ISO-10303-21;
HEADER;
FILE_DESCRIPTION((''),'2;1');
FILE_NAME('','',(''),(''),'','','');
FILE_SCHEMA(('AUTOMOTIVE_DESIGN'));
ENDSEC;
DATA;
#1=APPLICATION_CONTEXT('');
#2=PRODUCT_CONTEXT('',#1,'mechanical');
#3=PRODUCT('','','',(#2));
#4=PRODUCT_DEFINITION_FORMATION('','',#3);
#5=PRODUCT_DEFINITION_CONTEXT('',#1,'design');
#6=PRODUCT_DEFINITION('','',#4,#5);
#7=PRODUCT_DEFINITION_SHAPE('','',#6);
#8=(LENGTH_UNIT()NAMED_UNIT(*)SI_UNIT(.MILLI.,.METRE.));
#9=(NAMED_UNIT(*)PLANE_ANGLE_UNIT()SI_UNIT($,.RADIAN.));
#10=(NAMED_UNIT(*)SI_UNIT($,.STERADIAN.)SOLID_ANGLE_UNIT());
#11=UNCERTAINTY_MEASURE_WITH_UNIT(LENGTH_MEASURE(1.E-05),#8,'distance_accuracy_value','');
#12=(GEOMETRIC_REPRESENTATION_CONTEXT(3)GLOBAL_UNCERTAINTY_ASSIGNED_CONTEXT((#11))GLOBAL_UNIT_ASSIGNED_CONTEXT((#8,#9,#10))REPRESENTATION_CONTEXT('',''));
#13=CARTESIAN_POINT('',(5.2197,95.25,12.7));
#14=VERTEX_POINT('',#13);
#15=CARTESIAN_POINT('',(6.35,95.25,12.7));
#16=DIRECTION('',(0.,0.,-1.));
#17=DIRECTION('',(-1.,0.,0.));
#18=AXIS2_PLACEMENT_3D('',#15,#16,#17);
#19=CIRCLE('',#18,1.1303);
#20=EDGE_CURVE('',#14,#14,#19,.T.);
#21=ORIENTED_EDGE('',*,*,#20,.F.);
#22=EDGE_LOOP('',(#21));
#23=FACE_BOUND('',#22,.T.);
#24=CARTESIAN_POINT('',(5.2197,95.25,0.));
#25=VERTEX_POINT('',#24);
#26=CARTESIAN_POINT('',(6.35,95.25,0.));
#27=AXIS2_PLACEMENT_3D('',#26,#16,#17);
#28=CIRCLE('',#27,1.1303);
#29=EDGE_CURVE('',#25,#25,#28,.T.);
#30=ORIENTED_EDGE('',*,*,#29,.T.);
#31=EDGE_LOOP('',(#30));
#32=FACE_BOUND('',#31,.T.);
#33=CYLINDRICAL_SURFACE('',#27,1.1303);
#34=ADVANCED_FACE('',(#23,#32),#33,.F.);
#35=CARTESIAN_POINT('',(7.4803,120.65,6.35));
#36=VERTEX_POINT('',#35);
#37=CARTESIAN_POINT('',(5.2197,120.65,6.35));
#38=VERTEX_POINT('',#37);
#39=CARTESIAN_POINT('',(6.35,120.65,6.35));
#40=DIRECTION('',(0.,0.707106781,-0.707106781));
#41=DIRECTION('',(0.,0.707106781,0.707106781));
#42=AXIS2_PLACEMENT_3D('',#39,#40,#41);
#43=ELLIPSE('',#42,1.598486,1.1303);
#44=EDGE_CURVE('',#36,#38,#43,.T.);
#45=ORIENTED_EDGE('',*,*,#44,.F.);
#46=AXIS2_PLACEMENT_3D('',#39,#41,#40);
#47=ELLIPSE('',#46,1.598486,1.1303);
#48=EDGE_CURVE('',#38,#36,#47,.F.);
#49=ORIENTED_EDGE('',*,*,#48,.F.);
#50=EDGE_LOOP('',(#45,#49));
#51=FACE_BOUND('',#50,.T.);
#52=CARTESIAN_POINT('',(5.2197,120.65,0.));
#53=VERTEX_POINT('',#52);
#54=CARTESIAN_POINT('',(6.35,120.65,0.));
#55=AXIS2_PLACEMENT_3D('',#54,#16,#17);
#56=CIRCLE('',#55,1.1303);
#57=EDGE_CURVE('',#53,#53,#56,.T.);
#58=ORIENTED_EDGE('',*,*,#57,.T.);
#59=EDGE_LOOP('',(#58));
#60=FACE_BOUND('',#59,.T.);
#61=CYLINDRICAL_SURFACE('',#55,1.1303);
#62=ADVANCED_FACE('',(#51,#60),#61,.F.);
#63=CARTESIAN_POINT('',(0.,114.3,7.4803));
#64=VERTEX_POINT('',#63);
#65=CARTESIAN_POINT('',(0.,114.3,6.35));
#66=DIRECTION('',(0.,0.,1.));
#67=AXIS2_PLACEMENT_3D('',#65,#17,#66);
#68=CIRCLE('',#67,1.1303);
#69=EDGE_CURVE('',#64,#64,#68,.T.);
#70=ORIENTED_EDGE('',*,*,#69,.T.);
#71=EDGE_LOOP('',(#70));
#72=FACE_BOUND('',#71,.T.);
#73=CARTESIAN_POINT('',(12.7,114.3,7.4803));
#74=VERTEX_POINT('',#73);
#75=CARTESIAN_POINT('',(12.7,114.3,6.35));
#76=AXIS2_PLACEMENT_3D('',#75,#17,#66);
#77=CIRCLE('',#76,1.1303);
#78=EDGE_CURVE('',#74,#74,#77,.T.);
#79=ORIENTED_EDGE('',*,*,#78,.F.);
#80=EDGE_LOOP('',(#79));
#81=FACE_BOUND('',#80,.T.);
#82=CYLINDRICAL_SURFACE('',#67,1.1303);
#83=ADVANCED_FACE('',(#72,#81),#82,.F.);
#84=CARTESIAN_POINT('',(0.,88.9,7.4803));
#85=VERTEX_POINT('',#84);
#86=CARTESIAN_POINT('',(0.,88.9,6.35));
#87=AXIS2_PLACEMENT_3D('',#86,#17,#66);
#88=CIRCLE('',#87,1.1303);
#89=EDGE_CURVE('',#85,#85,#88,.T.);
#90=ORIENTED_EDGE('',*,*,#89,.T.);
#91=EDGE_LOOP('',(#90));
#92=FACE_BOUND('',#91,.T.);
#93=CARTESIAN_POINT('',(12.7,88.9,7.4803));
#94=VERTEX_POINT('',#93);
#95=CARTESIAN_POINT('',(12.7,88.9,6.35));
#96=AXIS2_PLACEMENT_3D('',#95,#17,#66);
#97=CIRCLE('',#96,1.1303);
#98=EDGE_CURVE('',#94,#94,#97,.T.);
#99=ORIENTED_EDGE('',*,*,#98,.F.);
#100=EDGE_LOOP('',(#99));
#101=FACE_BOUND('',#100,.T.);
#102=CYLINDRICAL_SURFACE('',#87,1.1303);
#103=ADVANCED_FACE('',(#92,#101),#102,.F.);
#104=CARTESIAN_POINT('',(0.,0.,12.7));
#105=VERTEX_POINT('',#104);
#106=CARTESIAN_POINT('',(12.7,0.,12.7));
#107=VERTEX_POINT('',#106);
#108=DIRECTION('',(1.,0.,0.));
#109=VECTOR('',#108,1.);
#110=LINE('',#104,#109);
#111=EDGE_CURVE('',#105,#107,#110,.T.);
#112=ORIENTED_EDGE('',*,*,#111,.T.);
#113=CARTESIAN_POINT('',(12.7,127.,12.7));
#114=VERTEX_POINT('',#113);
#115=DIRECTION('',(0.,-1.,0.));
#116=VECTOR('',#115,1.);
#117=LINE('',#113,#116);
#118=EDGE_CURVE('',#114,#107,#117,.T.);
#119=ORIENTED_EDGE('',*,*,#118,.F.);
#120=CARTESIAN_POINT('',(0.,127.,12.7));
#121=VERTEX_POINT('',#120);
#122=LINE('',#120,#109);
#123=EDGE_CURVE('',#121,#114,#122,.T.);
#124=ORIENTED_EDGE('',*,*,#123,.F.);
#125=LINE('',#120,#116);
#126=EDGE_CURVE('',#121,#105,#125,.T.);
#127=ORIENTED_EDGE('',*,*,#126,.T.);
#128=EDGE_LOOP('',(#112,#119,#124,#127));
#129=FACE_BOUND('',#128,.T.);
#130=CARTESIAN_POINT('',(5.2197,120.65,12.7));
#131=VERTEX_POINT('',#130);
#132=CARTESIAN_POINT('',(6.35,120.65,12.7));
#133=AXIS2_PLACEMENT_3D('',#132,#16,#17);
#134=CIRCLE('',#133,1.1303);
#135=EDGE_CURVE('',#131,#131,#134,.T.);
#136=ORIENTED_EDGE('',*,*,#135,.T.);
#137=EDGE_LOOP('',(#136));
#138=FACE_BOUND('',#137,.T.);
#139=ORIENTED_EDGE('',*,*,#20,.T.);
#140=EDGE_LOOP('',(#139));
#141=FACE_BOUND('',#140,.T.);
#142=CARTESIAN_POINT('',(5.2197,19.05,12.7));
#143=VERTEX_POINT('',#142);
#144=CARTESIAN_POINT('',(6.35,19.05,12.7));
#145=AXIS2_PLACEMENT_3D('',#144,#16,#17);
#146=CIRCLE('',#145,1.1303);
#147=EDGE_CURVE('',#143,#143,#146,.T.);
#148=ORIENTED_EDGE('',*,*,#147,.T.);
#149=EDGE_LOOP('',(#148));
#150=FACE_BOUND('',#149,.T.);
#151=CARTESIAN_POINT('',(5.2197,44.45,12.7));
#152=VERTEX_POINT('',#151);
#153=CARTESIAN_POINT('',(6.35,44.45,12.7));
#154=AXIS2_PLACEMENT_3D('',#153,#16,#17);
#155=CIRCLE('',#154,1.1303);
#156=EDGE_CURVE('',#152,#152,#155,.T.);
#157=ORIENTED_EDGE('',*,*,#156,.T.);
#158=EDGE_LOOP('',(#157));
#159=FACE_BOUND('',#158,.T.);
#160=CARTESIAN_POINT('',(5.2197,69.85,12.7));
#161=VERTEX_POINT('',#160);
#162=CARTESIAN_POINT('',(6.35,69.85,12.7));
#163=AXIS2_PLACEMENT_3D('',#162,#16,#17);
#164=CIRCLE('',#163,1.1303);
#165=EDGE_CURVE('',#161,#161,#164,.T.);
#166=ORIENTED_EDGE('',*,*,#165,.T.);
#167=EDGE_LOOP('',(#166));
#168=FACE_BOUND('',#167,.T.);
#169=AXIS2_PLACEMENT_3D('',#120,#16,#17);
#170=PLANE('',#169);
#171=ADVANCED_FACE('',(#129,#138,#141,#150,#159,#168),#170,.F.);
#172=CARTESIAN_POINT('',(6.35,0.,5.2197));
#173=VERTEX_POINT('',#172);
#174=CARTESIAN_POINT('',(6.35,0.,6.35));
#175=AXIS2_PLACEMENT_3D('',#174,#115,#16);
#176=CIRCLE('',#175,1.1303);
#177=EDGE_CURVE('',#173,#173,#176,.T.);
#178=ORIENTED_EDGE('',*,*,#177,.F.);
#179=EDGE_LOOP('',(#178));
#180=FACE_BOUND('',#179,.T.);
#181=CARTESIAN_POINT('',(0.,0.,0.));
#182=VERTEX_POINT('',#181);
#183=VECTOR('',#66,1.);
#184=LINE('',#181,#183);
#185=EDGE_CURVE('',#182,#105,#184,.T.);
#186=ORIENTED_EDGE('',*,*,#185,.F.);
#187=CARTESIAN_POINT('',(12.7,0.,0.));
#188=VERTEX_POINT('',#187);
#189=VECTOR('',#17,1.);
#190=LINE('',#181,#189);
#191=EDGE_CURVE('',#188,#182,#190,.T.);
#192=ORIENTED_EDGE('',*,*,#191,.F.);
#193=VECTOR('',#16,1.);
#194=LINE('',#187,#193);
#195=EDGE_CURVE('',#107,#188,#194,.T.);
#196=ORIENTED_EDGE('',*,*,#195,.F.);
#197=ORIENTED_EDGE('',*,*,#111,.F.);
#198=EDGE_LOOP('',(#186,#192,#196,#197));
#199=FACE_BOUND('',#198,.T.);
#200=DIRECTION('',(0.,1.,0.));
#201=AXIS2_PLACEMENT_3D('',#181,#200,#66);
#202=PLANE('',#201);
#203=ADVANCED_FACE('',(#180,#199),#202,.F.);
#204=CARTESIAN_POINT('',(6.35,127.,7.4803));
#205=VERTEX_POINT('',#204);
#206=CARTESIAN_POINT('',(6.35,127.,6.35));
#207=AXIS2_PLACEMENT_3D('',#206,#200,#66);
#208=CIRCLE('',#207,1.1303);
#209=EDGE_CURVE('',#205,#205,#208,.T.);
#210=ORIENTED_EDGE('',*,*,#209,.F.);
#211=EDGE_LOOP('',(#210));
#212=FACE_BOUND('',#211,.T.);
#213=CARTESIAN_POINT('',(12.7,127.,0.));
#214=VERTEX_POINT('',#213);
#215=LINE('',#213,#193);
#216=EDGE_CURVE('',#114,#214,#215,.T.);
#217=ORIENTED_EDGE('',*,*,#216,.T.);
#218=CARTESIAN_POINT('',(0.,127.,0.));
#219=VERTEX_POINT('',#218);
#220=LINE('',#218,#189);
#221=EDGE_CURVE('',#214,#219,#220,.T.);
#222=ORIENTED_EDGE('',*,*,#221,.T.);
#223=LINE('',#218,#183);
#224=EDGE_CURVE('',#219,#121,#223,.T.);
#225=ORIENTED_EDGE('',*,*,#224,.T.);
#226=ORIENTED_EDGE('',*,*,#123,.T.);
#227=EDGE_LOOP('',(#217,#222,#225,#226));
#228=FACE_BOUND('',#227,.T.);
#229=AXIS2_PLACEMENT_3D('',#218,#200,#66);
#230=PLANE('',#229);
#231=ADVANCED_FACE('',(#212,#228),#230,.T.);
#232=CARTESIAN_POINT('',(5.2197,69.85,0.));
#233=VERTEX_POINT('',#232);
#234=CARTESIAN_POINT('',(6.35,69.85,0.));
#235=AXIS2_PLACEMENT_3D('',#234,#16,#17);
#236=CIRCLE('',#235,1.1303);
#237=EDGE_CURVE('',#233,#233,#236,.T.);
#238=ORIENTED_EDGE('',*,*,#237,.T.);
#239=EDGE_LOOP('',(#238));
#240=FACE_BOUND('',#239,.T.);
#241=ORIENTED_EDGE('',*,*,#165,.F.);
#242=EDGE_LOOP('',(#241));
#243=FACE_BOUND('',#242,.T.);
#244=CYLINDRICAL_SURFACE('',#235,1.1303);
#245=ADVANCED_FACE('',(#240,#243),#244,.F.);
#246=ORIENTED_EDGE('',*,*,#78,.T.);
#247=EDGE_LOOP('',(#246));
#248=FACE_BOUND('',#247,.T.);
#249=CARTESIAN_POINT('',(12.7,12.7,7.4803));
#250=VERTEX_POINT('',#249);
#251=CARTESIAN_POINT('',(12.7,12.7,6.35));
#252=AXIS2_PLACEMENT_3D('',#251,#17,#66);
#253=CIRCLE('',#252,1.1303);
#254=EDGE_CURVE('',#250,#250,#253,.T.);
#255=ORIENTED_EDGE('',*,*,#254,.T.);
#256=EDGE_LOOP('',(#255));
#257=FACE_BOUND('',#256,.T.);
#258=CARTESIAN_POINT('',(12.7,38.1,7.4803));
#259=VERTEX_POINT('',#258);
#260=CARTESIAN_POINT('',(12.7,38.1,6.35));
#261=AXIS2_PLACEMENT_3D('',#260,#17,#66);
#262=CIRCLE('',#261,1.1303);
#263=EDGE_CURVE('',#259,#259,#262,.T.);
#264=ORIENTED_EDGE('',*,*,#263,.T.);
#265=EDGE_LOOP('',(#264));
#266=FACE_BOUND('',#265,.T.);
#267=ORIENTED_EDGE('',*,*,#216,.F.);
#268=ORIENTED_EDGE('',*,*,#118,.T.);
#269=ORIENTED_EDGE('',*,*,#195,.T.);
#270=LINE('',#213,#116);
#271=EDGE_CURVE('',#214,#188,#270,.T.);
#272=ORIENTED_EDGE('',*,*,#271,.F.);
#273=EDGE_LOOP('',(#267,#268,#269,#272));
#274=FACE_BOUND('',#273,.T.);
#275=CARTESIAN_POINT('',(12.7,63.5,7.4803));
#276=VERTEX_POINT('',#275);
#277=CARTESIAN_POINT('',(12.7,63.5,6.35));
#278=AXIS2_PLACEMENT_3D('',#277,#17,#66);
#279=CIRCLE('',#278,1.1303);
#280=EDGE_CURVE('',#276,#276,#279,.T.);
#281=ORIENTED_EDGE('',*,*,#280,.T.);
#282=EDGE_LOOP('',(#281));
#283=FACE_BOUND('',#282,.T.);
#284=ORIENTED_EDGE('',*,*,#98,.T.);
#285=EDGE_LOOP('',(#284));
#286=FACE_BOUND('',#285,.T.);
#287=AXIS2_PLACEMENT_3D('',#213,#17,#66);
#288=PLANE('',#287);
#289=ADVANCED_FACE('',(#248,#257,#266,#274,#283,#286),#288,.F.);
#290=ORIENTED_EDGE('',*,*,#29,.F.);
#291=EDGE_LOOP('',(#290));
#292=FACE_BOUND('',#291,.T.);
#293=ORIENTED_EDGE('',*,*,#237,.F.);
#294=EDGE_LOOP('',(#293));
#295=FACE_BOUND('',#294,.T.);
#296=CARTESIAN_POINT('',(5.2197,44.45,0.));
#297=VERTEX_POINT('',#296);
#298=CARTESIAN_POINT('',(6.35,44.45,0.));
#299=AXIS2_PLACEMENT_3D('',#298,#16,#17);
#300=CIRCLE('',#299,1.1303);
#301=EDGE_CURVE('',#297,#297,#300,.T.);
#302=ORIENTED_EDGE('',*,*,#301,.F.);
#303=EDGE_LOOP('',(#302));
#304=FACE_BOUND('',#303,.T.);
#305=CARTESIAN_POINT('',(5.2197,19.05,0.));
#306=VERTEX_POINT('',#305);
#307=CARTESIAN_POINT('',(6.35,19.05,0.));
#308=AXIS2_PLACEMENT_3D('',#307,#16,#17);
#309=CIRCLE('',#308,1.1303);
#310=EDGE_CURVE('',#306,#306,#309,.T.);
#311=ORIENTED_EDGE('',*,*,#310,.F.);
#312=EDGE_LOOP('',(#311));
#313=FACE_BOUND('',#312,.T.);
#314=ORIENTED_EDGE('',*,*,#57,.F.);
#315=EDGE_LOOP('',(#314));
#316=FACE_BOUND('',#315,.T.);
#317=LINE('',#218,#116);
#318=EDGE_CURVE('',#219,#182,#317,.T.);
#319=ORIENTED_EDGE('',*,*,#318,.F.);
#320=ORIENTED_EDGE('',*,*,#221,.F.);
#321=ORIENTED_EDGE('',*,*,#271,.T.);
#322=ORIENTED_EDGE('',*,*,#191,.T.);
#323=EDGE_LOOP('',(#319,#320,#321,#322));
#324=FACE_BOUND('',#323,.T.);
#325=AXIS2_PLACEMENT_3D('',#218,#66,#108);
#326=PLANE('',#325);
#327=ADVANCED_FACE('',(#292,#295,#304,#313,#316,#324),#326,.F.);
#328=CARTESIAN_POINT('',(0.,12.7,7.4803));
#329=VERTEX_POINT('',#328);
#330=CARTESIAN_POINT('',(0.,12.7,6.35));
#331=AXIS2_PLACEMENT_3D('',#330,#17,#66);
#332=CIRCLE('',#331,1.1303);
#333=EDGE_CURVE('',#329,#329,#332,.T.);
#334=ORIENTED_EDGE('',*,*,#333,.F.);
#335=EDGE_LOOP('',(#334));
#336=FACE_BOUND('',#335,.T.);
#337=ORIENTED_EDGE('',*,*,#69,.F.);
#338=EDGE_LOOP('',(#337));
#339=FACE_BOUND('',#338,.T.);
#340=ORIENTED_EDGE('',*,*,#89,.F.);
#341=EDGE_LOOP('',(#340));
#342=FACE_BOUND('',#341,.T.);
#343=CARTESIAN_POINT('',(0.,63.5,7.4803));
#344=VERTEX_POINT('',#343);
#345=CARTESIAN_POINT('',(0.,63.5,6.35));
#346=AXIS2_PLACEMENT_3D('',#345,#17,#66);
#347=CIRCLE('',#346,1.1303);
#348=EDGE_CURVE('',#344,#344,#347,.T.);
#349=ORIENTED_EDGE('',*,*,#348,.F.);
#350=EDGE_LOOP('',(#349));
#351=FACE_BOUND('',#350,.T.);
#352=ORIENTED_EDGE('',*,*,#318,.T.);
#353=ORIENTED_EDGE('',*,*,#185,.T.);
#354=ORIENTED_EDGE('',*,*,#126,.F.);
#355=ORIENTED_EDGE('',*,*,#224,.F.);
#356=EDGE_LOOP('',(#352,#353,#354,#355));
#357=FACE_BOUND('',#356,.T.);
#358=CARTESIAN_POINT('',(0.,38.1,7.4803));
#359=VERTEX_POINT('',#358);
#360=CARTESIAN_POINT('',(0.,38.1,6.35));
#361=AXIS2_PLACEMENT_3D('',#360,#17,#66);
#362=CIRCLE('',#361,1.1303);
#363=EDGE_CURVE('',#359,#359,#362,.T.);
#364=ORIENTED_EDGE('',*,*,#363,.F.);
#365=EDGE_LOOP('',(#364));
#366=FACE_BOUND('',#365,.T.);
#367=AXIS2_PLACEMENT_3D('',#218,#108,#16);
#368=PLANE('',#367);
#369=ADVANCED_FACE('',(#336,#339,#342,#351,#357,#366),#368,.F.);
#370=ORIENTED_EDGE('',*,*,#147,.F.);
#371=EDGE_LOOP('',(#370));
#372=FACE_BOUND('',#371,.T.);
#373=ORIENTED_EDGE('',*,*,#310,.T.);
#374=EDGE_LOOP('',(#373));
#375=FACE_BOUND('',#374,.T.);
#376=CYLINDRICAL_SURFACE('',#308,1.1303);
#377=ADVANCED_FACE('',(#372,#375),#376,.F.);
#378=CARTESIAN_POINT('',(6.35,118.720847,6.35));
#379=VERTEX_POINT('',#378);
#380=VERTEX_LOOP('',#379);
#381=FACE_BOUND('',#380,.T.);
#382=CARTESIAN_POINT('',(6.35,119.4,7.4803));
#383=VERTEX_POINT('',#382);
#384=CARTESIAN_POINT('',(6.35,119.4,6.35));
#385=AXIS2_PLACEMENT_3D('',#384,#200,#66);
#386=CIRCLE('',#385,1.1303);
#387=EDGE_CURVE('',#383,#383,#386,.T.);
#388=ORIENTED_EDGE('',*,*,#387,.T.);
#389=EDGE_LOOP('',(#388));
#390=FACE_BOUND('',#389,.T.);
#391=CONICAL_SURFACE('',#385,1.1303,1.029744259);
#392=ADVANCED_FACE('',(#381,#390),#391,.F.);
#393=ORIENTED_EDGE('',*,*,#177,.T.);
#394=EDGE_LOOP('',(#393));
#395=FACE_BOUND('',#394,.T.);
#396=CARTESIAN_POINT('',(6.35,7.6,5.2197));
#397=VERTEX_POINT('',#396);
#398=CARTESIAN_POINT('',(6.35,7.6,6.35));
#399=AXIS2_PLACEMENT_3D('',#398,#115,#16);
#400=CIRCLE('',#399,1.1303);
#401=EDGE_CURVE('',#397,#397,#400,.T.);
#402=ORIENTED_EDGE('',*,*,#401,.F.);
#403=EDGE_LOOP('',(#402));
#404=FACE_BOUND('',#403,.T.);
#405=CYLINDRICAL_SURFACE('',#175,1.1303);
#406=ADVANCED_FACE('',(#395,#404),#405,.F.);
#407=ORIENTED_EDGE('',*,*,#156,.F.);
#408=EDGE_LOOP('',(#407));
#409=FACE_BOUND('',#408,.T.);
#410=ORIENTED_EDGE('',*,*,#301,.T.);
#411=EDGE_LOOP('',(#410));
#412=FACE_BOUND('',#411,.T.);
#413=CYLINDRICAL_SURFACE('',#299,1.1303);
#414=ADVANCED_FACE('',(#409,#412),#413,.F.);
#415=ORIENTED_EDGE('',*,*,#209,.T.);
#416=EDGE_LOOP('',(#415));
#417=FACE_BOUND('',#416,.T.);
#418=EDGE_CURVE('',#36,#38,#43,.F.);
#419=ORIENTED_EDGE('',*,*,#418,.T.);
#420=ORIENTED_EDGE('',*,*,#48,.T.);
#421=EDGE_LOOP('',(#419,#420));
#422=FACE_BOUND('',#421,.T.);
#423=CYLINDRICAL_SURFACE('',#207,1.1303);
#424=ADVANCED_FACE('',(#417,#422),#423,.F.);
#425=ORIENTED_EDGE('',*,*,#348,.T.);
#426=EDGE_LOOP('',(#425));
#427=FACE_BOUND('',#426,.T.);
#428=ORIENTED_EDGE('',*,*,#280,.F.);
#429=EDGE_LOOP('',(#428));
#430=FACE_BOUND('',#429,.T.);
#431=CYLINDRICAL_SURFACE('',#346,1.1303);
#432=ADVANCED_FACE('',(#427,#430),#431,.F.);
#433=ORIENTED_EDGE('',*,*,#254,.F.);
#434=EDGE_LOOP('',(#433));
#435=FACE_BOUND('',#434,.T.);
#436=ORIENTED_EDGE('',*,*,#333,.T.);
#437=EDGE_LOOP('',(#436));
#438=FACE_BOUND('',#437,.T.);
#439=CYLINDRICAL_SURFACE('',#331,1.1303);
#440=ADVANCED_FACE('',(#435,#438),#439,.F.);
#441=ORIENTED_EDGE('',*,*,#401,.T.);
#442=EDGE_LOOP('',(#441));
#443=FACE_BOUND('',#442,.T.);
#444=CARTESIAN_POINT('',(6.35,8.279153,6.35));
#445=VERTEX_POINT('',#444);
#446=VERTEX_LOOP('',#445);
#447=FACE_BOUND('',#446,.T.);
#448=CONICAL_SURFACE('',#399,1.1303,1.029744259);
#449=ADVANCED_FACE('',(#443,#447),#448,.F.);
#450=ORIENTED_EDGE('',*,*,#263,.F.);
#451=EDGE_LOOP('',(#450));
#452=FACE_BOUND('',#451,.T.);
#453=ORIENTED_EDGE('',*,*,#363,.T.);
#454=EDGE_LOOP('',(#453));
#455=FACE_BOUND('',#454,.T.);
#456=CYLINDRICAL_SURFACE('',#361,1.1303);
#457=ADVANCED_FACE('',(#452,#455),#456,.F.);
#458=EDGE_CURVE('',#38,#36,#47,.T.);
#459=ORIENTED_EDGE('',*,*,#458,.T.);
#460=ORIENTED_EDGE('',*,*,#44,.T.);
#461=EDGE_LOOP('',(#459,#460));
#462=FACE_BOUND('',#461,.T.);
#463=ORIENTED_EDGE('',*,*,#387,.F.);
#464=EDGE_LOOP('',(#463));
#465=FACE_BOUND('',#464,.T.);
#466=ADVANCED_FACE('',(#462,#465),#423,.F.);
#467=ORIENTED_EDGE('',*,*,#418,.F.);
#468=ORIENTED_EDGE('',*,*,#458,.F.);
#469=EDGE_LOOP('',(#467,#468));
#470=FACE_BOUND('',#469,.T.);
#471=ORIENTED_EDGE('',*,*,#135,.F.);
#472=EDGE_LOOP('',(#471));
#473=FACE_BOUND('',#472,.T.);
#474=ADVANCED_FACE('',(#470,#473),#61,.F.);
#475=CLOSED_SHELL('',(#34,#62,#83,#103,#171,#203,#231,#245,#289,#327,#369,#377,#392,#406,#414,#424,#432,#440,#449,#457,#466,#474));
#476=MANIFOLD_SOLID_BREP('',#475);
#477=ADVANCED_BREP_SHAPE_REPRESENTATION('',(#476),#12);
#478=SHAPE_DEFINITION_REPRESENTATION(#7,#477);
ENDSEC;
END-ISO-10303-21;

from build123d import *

# Parameters (mm, degrees)
SKETCH1_W                           = 12.7
SKETCH1_H                           = 12.7
BOSS_EXTRUDE1_DEPTH                 = 127
F_4_40_TAPPED_HOLE1_D               = 2.2606
F_4_40_TAPPED_HOLE1_DEPTH           = 7.6
F_4_40_TAPPED_HOLE1_TIP             = 0.679152758
F_4_40_TAPPED_HOLE1_ON_FACE_2_D     = 2.2606
F_4_40_TAPPED_HOLE1_ON_FACE_2_DEPTH = 7.6
F_4_40_TAPPED_HOLE1_ON_FACE_2_TIP   = 0.679152758
F_4_40_TAPPED_HOLE2_D               = 2.2606
LPATTERN1_COUNT                     = 5
LPATTERN1_PITCH                     = 25.4
F_4_40_TAPPED_HOLE3_OUTLINE_R       = 1.1303
F_4_40_TAPPED_HOLE3_DEPTH           = 12.7
LPATTERN2_COUNT                     = 5
LPATTERN2_PITCH                     = 25.4


# Read off the part's stored shape, not the designer's step: #4-40 Tapped Hole3
with BuildPart() as part:
    # Sketch1 → Boss-Extrude1 (new body)
    with BuildSketch(Plane(origin=(0, 0, 0), x_dir=(1, 0, 0), z_dir=(0, 1, 0))):
        with Locations((6.35, -6.35)):
            Rectangle(SKETCH1_W, SKETCH1_H)
    extrude(amount=BOSS_EXTRUDE1_DEPTH)

    # #4-40 Tapped Hole1
    with Locations(Plane(origin=(6.35, 127, 6.35), x_dir=(0, 0, 1), z_dir=(0, 1, 0))):
        with Locations((0, 0)):
            Hole(F_4_40_TAPPED_HOLE1_D / 2, depth=F_4_40_TAPPED_HOLE1_DEPTH)
            with Locations((0, 0, -(F_4_40_TAPPED_HOLE1_DEPTH + F_4_40_TAPPED_HOLE1_TIP / 2))):  # 118° drill point
                Cone(0, F_4_40_TAPPED_HOLE1_D / 2, F_4_40_TAPPED_HOLE1_TIP, mode=Mode.SUBTRACT)

    # #4-40 Tapped Hole1 on face 2
    with Locations(Plane(origin=(6.35, 0, 6.35), x_dir=(0, 0, -1), z_dir=(0, -1, 0))):
        with Locations((0, 0)):
            Hole(F_4_40_TAPPED_HOLE1_ON_FACE_2_D / 2, depth=F_4_40_TAPPED_HOLE1_ON_FACE_2_DEPTH)
            with Locations((0, 0, -(F_4_40_TAPPED_HOLE1_ON_FACE_2_DEPTH + F_4_40_TAPPED_HOLE1_ON_FACE_2_TIP / 2))):  # 118° drill point
                Cone(0, F_4_40_TAPPED_HOLE1_ON_FACE_2_D / 2, F_4_40_TAPPED_HOLE1_ON_FACE_2_TIP, mode=Mode.SUBTRACT)

    # #4-40 Tapped Hole2 (through all)
    with Locations(Plane(origin=(6.35, 120.65, 0), x_dir=(-1, 0, 0), z_dir=(0, 0, -1))):
        with Locations((0, 0)):
            f_4_40_tapped_hole2 = Hole(F_4_40_TAPPED_HOLE2_D / 2)

    # LPattern1: #4-40 Tapped Hole2 ×5
    with Locations(*[(0, -i * LPATTERN1_PITCH, 0) for i in range(1, LPATTERN1_COUNT)]):
        add(f_4_40_tapped_hole2, mode=Mode.SUBTRACT)

    # #4-40 Tapped Hole3 outline → #4-40 Tapped Hole3 (cut)
    with BuildSketch(Plane.YZ):
        with Locations((114.3, 6.35)):
            Circle(F_4_40_TAPPED_HOLE3_OUTLINE_R)
    f_4_40_tapped_hole3 = extrude(amount=F_4_40_TAPPED_HOLE3_DEPTH, mode=Mode.SUBTRACT)

    # LPattern2: #4-40 Tapped Hole3 ×5
    with Locations(*[(0, -i * LPATTERN2_PITCH, 0) for i in range(1, LPATTERN2_COUNT)]):
        add(f_4_40_tapped_hole3, mode=Mode.SUBTRACT)


solid = part.part
